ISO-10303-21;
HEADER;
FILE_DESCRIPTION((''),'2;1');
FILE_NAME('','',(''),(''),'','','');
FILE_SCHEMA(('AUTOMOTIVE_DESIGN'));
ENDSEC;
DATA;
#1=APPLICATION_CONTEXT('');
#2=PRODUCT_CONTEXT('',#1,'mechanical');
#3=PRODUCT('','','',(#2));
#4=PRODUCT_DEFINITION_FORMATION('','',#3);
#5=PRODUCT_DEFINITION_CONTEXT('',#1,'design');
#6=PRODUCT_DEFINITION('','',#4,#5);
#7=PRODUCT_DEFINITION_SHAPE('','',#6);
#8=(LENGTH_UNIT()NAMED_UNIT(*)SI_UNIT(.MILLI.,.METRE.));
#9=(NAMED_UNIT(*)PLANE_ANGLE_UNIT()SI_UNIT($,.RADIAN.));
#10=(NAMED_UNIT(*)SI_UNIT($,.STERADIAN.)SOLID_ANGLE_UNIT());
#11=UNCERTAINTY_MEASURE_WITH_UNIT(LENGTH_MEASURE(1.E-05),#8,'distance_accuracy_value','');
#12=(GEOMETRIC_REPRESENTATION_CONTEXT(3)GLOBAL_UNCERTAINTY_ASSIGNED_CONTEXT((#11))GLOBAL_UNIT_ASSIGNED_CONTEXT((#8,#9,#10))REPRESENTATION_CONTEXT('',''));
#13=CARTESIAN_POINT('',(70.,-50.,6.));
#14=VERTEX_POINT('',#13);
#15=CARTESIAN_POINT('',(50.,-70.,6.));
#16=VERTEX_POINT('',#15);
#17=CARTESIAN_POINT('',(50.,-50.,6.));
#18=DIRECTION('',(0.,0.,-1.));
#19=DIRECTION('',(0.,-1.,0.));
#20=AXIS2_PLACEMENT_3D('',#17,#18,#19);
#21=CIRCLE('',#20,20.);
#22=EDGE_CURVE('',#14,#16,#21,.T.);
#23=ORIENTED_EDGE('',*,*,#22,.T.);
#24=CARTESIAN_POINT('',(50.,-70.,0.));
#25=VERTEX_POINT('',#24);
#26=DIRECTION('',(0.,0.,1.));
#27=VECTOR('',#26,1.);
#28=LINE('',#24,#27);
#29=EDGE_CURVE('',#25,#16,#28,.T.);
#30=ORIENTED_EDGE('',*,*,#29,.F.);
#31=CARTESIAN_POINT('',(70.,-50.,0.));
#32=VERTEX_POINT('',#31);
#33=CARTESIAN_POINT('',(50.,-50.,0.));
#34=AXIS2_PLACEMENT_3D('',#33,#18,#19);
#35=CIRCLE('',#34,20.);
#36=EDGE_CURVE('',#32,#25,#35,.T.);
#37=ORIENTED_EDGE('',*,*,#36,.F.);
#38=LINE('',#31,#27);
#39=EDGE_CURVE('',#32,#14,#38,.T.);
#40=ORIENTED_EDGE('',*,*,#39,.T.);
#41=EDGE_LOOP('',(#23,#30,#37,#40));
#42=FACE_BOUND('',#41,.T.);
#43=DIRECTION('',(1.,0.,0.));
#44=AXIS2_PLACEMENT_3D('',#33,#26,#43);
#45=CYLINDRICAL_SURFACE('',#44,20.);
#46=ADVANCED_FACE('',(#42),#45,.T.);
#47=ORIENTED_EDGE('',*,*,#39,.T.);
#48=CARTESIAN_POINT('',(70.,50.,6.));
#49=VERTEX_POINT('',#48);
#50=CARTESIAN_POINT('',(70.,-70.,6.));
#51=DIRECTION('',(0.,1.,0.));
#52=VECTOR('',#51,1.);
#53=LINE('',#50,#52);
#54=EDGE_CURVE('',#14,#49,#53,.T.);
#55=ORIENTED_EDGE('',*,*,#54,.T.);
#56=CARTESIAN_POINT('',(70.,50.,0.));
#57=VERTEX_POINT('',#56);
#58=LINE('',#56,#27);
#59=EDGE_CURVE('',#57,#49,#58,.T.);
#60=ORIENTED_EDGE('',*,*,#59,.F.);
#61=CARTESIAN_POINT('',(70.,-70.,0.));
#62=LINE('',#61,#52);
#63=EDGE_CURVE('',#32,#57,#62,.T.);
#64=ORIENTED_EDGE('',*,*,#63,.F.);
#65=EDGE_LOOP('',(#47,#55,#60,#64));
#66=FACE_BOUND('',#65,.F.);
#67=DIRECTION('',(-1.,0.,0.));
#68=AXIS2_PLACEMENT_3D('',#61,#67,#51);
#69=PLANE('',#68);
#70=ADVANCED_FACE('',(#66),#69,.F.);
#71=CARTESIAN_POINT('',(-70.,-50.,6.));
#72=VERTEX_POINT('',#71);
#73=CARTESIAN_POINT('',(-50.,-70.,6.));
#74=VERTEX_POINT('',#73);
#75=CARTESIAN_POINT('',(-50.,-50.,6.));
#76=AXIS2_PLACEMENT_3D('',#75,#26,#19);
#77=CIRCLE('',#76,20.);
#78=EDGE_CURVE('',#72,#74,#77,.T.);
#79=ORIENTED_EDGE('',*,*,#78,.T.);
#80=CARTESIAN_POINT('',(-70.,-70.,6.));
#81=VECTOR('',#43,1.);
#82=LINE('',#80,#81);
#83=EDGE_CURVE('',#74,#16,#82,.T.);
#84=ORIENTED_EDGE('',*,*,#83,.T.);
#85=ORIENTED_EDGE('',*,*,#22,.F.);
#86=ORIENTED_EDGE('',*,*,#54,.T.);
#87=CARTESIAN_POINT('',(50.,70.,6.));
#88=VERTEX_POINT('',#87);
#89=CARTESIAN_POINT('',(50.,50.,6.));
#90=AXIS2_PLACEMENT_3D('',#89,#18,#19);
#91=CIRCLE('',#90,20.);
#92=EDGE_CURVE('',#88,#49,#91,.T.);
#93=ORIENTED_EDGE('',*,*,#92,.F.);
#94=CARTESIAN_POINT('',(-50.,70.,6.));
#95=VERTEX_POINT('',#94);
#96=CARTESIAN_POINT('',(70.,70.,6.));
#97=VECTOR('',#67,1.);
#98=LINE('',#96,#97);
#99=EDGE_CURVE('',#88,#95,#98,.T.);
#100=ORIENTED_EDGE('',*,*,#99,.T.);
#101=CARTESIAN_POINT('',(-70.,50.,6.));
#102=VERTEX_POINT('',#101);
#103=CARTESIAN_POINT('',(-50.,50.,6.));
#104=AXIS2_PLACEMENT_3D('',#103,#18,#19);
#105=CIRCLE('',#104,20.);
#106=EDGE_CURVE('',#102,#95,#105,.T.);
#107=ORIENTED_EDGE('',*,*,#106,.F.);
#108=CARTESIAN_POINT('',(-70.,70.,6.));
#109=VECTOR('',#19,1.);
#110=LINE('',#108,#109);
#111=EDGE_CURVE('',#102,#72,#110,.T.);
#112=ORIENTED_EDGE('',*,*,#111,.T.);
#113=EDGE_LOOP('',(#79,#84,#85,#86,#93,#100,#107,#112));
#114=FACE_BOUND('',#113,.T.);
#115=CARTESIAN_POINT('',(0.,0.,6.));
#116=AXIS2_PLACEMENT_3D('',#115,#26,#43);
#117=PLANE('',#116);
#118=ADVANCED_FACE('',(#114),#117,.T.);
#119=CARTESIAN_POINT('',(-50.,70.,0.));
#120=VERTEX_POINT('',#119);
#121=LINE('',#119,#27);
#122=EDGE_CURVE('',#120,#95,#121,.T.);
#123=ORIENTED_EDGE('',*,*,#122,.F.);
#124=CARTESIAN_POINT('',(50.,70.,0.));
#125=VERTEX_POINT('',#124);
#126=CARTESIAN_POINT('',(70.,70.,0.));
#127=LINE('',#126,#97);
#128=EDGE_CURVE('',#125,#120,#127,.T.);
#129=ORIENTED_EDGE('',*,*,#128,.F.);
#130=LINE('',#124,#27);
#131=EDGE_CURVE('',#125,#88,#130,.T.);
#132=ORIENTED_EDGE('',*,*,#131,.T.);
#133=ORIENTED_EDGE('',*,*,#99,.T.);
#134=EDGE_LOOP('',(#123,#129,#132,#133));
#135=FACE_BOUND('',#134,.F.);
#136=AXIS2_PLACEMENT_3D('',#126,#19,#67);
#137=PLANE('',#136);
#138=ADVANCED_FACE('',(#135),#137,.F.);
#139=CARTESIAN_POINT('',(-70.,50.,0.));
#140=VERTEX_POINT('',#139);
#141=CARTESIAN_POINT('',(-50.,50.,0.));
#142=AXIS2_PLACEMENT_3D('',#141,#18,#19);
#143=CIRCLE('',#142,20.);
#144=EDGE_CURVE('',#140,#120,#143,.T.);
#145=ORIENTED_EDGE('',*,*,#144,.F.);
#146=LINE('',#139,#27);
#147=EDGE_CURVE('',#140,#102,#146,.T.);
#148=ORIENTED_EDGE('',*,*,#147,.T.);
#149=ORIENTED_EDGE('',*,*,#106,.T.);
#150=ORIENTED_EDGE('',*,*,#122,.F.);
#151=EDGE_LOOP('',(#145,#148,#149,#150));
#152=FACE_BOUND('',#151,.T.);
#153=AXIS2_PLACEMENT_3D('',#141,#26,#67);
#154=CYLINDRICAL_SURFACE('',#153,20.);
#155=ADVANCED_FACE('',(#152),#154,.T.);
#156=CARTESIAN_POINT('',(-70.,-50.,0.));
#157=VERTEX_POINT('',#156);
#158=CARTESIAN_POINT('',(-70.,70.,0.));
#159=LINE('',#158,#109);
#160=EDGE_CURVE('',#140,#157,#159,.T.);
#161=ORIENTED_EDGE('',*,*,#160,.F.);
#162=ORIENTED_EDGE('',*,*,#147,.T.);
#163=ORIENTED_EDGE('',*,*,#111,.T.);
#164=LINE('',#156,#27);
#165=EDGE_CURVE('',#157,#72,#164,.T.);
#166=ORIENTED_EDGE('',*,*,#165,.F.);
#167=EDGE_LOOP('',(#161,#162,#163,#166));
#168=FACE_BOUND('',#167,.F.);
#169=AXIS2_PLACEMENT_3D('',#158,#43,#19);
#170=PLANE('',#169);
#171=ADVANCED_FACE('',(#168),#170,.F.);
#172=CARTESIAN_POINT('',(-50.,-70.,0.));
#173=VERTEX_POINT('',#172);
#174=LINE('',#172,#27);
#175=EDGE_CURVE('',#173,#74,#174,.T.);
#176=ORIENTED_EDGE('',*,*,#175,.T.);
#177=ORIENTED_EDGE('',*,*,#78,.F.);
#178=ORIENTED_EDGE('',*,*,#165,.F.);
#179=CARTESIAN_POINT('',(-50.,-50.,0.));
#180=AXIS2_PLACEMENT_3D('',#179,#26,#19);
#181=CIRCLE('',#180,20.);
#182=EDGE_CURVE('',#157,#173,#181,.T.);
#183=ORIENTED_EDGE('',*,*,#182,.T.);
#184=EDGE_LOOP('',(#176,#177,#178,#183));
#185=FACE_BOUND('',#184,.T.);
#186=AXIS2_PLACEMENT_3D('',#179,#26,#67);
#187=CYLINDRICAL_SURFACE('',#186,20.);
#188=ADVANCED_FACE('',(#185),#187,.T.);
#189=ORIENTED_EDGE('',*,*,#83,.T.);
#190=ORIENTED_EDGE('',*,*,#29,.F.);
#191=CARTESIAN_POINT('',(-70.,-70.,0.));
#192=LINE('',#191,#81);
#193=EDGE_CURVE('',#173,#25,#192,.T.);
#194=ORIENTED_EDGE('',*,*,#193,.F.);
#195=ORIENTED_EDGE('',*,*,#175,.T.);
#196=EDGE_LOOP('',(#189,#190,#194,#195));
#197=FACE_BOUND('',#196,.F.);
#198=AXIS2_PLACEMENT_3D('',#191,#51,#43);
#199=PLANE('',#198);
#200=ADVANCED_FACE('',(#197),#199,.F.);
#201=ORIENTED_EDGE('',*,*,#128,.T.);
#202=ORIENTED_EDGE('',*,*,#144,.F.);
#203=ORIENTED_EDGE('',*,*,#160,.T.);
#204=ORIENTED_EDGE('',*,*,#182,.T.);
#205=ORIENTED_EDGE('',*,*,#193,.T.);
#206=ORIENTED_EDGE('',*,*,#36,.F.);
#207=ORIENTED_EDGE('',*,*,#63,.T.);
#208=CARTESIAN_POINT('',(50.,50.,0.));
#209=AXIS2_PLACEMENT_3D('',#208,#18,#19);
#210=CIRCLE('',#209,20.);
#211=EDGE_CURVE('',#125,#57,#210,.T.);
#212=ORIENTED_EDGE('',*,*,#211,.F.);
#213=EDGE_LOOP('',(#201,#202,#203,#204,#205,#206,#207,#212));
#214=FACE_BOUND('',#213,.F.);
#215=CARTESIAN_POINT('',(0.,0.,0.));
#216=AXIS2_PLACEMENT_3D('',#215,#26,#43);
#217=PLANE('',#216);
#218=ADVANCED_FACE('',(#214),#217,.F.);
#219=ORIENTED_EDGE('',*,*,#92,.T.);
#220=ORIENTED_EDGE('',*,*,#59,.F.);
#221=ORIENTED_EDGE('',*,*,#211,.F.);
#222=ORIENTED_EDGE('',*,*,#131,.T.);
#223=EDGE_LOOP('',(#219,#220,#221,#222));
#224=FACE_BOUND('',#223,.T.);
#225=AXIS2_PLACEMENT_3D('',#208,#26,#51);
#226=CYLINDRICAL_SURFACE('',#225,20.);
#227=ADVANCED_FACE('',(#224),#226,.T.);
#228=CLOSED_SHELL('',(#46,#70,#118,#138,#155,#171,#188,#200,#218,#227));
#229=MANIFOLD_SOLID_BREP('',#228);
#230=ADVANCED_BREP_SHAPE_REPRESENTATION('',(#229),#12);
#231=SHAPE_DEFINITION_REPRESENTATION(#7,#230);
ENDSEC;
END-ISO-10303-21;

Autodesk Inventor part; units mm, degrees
ref_plane "YZ Plane" through (0, 0, 0) normal (1, 0, 0) x (0, 1, 0)
ref_plane "XZ Plane" through (0, 0, 0) normal (0, 1, 0) x (-1, 0, 0)
ref_plane "XY Plane" through (0, 0, 0) normal (0, 0, 1) x (1, 0, 0)
sketch "Sketch1" plane through (0, 0, 0) normal (0, 0, 1) x (1, 0, 0)
  line L0 (-70, -70) -> (70, -70)
  line L1 (70, -70) -> (70, 70)
  line L2 (70, 70) -> (-70, 70)
  line L3 (-70, 70) -> (-70, -70)
  line L4 (-70, -70) -> (70, 70) construction
  line L5 (70, -70) -> (-70, 70) construction
  point P0 (0, 0)
  dimension "d0" = 140
  dimension "d1" = 140
extrude "Plate1" add sketch "Sketch1" along normal blind 6
fillet "Corner Round1" radius 20 4 edges at (70, -70, 3) (-70, -70, 3) (-70, 70, 3) (70, 70, 3)
equation "\"d0\" = d1"
equation "\"d2\" = Thickness"
equation "\"BendReliefWidth\" = Thickness"
equation "\"BendReliefDepth\" = 0.5 * Thickness"
equation "\"CornerReliefSize\" = 4 * Thickness"
equation "\"MinimumRemnant\" = 2 * Thickness"
equation "\"TransitionRadius\" = BendRadius"
equation "\"JacobiRadiusSize\" = BendRadius"
equation "\"GapSize\" = Thickness"
equation "\"Thickness\" = 6"
equation "\"BendRadius\" = 5"
properties part number "PNS-782 leg plate for filter" material "Steel"
